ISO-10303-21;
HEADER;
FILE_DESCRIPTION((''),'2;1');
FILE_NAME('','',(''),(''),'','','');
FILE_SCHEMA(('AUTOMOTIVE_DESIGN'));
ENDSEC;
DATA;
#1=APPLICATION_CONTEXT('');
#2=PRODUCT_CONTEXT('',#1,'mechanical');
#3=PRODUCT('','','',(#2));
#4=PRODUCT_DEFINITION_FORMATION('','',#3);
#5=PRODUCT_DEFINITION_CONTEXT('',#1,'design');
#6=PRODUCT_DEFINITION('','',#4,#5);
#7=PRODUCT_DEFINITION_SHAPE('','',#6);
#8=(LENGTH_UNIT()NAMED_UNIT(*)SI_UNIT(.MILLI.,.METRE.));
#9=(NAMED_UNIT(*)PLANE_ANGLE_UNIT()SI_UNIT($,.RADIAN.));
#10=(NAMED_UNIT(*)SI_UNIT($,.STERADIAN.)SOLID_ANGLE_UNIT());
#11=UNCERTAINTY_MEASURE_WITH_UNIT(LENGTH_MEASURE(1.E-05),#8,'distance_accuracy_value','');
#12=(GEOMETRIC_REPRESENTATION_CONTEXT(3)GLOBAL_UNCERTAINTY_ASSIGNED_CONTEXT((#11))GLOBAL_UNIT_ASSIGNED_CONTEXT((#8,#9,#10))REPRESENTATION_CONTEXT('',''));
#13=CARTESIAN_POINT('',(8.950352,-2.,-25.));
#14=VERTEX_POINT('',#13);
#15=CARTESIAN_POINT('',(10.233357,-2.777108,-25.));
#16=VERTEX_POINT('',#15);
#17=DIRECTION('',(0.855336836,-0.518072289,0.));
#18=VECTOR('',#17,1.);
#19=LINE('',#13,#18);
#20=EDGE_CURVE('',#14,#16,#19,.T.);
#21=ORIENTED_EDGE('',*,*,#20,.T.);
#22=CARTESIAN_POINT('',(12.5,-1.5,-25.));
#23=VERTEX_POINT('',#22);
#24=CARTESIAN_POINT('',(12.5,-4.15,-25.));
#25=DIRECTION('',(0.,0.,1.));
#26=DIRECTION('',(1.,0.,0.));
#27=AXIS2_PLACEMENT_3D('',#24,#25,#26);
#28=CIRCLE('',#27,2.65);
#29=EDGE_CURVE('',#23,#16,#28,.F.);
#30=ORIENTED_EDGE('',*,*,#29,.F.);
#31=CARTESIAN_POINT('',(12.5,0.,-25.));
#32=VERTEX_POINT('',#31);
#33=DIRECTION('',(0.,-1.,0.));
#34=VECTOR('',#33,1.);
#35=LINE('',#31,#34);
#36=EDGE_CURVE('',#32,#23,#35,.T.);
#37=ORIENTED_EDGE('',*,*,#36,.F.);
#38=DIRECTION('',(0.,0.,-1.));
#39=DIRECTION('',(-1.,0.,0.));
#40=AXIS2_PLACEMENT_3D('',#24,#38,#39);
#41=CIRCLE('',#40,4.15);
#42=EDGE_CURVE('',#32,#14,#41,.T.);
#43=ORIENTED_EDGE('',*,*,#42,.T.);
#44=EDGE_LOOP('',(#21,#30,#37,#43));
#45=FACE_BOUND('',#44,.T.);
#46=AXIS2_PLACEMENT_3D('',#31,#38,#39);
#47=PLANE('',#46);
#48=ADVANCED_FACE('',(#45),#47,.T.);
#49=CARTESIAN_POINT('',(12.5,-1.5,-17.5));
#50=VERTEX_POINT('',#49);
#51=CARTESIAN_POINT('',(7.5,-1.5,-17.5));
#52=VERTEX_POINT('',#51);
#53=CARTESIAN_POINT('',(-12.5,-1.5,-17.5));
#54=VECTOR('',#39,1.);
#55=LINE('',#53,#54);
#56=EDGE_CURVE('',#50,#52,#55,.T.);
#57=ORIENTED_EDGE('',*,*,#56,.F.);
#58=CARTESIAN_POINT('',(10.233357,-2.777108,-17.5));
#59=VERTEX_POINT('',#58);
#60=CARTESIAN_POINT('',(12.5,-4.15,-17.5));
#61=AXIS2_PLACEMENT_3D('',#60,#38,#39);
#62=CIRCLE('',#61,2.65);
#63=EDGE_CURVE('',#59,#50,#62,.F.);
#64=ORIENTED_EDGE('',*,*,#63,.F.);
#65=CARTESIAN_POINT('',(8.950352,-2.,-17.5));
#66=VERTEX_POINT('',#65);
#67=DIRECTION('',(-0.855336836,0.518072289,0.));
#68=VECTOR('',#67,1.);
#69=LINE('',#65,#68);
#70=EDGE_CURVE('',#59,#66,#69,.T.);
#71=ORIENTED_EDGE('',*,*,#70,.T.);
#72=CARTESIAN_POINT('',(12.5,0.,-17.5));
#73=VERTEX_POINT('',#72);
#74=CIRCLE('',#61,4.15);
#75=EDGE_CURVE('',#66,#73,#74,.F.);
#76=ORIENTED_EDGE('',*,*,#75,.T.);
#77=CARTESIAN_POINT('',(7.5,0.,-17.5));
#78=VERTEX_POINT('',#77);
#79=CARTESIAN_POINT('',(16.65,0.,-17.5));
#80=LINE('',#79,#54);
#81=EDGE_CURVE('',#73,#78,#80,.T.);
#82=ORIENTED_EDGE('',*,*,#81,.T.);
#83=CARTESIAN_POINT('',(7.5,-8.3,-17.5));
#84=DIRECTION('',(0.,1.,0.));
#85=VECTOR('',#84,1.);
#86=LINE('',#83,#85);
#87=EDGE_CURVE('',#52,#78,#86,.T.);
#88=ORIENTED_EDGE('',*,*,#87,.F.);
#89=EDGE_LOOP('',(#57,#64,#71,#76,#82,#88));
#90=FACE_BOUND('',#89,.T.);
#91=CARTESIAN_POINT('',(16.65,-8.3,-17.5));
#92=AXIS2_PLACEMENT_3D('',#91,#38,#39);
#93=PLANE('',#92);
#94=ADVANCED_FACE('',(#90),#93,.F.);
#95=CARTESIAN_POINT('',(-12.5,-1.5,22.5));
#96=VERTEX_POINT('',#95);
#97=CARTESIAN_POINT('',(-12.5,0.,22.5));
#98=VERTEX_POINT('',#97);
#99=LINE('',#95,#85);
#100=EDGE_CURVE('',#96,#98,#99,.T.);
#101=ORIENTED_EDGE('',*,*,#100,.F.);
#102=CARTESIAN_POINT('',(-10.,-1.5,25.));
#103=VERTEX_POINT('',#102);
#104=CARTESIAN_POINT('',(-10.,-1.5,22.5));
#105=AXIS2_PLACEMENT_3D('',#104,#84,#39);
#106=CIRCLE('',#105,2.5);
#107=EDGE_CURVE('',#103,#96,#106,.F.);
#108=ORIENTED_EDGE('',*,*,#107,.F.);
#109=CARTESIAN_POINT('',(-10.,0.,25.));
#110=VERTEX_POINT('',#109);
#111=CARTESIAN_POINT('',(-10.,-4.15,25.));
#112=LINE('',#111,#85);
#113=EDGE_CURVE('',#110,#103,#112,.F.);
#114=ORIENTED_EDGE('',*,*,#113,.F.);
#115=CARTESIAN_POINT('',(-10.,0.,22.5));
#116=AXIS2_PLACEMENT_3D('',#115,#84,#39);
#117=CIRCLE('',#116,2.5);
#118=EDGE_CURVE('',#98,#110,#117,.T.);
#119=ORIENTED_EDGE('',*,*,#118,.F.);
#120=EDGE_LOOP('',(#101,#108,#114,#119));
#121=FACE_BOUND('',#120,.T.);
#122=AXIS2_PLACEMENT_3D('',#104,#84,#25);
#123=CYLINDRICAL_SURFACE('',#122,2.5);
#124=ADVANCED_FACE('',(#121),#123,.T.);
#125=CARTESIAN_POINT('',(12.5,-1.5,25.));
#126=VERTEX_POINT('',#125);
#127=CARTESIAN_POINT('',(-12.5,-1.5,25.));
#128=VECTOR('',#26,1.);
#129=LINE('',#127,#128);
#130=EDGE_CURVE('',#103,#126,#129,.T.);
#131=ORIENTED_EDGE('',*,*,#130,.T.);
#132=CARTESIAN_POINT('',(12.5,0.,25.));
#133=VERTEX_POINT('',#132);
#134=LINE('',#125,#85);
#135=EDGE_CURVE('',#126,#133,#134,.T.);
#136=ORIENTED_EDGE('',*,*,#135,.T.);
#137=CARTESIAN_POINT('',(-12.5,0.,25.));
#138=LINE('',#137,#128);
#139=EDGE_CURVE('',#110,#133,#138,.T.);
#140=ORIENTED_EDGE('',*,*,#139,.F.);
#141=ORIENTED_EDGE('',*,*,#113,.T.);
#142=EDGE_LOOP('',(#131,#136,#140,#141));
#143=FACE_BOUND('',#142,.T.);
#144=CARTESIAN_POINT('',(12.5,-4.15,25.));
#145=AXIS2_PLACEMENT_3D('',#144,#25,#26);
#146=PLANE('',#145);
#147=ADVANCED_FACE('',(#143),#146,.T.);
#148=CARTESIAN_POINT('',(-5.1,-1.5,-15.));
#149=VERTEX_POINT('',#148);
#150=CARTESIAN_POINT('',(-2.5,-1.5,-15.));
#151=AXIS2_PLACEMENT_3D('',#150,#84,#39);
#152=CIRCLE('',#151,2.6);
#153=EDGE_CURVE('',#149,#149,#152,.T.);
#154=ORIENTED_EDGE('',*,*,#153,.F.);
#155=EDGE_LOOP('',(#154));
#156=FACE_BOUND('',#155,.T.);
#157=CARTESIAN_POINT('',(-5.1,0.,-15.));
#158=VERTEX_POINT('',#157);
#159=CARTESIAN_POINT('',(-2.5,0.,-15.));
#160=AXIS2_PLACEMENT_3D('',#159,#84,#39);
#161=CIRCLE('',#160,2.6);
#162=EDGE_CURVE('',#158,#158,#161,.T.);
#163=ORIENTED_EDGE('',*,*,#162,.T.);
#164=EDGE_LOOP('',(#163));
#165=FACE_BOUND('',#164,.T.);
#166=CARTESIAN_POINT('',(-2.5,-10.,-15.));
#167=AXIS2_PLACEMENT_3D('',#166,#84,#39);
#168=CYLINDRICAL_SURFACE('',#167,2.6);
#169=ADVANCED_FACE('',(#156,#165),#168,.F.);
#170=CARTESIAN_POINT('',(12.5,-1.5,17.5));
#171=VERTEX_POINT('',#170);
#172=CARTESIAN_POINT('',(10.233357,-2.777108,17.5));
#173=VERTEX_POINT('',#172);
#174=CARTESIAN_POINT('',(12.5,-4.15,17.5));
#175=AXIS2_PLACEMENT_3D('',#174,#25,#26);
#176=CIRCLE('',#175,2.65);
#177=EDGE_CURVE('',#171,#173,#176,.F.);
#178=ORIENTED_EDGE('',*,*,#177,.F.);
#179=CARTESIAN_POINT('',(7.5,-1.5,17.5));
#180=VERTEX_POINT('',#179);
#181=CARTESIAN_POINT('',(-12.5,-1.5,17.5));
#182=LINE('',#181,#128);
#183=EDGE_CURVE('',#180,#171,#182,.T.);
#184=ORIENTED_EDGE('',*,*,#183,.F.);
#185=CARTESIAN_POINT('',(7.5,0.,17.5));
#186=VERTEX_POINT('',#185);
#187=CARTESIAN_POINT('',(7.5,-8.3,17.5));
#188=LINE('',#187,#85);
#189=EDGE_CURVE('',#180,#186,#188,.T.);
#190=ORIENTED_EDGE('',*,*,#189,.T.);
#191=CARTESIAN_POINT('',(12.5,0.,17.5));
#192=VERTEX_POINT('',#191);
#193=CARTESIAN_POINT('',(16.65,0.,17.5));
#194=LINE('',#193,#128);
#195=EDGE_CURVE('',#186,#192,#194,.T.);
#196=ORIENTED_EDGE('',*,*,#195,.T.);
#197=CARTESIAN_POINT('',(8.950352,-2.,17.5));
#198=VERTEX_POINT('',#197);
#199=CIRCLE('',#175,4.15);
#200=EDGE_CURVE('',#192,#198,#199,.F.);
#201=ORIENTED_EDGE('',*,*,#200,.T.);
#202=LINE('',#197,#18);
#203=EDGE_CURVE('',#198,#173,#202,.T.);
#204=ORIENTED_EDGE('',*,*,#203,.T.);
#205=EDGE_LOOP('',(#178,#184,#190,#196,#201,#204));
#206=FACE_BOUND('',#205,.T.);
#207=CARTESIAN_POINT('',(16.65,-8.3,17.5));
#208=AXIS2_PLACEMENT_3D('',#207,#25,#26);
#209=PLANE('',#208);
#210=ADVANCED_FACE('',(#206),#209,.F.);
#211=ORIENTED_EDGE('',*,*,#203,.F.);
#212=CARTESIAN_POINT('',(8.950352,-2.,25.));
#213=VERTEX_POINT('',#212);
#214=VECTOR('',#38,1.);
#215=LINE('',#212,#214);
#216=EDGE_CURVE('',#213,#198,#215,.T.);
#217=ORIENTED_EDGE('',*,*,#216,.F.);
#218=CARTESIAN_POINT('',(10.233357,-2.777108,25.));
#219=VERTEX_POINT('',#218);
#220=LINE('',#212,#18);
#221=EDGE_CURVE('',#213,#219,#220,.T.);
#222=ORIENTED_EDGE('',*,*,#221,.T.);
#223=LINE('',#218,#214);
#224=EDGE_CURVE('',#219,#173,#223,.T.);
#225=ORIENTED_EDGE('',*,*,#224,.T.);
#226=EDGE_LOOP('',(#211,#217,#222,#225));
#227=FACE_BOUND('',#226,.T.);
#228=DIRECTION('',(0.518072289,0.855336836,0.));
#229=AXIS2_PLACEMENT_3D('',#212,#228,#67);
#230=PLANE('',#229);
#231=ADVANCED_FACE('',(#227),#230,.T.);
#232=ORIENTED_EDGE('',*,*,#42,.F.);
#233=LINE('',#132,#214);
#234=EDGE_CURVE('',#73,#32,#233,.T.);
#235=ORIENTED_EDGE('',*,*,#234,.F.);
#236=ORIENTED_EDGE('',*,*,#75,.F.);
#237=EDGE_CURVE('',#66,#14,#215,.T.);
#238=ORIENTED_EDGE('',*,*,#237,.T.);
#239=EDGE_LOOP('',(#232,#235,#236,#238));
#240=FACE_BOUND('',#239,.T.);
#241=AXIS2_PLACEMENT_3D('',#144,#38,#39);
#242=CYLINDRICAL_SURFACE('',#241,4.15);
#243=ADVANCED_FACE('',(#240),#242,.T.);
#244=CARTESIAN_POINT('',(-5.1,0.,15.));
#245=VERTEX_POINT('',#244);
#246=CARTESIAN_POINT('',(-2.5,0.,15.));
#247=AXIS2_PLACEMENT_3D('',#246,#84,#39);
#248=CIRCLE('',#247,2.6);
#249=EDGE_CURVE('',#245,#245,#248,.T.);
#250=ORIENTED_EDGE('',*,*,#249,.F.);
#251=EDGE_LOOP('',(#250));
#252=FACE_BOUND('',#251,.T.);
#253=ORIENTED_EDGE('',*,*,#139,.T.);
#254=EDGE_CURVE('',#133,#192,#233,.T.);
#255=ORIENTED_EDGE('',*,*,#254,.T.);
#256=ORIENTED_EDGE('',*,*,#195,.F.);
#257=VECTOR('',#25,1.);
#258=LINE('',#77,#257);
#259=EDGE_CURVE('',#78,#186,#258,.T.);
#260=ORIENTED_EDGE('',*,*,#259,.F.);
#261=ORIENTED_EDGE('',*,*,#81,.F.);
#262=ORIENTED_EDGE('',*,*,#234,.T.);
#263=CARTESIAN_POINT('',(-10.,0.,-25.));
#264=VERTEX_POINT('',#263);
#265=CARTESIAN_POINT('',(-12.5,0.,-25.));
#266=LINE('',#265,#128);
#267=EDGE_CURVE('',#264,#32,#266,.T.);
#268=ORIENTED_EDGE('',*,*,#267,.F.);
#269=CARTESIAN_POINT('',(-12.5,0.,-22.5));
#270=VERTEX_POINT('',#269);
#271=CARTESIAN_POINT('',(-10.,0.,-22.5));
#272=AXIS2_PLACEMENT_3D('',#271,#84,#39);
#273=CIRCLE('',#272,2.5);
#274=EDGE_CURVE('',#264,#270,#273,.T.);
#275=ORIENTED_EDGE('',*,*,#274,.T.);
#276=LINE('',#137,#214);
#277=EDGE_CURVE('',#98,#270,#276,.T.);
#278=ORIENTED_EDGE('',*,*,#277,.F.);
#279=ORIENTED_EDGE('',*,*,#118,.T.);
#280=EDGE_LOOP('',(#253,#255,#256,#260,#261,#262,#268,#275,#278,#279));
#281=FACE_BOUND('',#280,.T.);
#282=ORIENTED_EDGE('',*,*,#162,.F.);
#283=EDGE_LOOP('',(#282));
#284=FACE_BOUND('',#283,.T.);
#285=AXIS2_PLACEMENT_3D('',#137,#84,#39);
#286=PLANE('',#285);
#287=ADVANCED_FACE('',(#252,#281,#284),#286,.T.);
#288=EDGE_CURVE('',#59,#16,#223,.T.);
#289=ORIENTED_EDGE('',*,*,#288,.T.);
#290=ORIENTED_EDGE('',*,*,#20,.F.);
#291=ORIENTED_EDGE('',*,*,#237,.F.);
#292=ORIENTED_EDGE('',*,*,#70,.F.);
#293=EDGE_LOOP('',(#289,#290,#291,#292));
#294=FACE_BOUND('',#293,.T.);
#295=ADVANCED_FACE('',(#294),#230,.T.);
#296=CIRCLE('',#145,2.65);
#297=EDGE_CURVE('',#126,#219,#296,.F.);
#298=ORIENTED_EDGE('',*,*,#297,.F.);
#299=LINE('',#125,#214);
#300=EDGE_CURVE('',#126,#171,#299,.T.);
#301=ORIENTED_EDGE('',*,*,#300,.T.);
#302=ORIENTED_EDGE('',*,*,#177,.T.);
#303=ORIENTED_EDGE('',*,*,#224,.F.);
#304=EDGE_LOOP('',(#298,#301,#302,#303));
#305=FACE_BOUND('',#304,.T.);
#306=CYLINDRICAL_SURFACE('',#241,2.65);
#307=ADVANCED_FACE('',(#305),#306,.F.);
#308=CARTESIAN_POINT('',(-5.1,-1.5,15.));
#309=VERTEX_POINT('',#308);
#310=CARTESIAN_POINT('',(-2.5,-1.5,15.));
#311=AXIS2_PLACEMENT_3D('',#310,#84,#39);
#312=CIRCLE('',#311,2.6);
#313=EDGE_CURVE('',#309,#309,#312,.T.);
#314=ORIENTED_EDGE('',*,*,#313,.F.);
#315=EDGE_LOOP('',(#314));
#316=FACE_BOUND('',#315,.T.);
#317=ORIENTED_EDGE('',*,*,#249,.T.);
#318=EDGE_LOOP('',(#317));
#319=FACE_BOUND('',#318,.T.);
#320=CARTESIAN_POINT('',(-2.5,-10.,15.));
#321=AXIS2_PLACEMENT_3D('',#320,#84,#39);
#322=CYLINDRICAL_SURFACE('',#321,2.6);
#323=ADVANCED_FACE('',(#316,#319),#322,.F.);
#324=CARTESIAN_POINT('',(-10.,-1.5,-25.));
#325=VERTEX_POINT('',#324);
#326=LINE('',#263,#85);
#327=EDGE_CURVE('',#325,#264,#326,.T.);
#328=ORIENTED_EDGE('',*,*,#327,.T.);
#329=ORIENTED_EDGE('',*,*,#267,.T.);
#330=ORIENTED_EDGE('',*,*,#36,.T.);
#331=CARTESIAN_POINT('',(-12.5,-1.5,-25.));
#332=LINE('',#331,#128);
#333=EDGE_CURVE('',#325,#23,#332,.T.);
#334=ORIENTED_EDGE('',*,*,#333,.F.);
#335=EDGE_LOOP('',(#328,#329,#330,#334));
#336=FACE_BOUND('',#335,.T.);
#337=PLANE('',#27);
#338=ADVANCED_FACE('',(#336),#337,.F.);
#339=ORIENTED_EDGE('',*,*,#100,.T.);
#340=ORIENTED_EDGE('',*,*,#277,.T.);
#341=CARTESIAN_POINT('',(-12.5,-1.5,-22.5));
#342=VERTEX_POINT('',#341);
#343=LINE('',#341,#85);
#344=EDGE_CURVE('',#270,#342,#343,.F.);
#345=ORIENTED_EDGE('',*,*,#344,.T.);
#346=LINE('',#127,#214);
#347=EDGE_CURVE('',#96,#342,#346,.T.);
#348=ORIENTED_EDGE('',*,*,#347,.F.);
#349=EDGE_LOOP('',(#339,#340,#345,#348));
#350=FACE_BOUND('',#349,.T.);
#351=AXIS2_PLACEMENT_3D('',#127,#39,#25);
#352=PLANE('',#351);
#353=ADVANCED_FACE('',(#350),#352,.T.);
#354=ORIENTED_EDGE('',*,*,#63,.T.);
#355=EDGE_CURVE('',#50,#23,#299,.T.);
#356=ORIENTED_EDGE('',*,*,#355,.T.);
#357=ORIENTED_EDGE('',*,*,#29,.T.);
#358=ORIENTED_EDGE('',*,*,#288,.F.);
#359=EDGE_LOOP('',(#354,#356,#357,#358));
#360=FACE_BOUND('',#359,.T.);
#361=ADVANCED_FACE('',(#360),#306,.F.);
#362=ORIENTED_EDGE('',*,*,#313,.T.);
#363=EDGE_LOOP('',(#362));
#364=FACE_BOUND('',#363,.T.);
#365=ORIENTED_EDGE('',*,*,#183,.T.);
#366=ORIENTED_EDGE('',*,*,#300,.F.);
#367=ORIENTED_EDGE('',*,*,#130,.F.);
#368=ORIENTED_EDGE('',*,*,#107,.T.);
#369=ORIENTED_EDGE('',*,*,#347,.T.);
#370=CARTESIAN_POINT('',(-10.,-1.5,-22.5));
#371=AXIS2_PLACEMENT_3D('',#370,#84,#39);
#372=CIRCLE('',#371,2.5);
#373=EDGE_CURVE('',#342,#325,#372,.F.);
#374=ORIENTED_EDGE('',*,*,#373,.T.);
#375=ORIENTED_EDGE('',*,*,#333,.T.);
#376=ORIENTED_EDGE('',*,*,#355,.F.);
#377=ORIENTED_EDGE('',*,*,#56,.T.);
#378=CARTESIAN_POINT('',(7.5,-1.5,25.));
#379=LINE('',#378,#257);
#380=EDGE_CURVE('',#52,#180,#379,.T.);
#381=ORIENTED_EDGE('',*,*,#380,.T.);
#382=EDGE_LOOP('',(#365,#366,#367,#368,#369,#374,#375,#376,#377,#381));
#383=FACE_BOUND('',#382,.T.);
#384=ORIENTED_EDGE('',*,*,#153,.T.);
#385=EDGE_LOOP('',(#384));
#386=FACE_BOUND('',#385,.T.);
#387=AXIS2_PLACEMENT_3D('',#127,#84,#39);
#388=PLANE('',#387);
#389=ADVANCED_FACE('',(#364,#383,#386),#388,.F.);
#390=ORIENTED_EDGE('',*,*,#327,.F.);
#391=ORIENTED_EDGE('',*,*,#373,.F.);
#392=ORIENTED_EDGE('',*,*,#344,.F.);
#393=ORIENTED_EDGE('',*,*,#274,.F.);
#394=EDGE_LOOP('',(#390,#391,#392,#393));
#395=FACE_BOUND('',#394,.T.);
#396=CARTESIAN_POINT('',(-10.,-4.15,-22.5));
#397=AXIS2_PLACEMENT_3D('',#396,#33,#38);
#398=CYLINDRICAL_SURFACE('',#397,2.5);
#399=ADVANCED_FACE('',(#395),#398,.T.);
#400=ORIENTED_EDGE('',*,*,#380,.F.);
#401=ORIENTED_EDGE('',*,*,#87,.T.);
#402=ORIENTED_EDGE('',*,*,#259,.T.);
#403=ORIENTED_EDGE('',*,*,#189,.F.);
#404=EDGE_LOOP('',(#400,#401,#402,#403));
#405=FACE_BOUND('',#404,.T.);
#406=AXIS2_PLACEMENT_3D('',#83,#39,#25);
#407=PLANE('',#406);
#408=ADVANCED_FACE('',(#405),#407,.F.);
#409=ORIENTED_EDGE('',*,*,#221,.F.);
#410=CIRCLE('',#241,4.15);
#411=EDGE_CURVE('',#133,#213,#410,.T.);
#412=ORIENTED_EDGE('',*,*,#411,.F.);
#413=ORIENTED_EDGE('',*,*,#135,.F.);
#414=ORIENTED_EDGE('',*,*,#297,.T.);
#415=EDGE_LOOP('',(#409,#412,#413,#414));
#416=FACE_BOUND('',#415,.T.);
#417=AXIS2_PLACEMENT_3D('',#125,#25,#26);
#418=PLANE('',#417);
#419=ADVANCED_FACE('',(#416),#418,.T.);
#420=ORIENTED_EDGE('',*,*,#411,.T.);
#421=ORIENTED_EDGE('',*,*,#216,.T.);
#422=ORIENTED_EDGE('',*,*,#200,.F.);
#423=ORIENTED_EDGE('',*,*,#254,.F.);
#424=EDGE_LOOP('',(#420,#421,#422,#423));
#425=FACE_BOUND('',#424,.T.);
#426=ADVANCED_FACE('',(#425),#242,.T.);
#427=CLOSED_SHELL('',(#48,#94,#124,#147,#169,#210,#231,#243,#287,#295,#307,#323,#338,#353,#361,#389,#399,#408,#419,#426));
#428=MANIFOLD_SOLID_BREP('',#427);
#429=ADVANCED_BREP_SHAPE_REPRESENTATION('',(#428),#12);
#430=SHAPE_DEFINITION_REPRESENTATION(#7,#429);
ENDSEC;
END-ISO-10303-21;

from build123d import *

# Parameters (mm, degrees)
TABAN_FLAN_1_DEPTH    = 25
IZIM9_W               = 9.15
IZIM9_H               = 35
KES_EKSTR_ZYON1_DEPTH = 32.162677998
IZIM11_R              = 2.6
KES_EKSTR_ZYON2_DEPTH = 10
RADYUS1_R             = 2.5


# Sheet-metal steps are written as plain solids
with BuildPart() as part:
    # Çizim1 → Taban-Flanş1 (new, symmetric)
    with BuildSketch(Plane.XY):
        with BuildLine():
            Line((-12.5, 0), (12.5, 0))
            ThreePointArc((12.5, 0), (14.537154879, -7.765591238), (8.95035213, -2))
            Line((8.95035213, -2), (10.233357384, -2.777108434))
            ThreePointArc((10.233357384, -2.777108434), (13.800833838, -6.458751031), (12.5, -1.5))
            Line((12.5, -1.5), (-12.5, -1.5))
            Line((-12.5, -1.5), (-12.5, 0))
        make_face()
    extrude(amount=TABAN_FLAN_1_DEPTH, both=True)

    # Çizim9 → Kes-Ekstrüzyon1 (cut, through all)
    with BuildSketch(Plane(origin=(0, 0, 0), x_dir=(1, 0, 0), z_dir=(0, 1, 0))):
        with Locations((12.075, 0)):
            Rectangle(IZIM9_W, IZIM9_H)
    extrude(amount=-KES_EKSTR_ZYON1_DEPTH, mode=Mode.SUBTRACT)

    # Çizim11 → Kes-Ekstrüzyon2 (cut)
    with BuildSketch(Plane(origin=(0, 0, 0), x_dir=(1, 0, 0), z_dir=(0, 1, 0))):
        with Locations(Location((-2.5, 15, 0), (0, 0, 180))):
            Circle(IZIM11_R)
        with Locations(Location((-2.5, -15, 0), (0, 0, 180))):
            Circle(IZIM11_R)
    extrude(amount=-KES_EKSTR_ZYON2_DEPTH, mode=Mode.SUBTRACT)

    # Radyus1
    radyus1_edges = [part.edges().sort_by_distance(p)[0] for p in [
        (-12.5, -0.75, 25),
        (-12.5, -0.75, -25),
    ]]
    fillet(radyus1_edges, radius=RADYUS1_R)


solid = part.part
